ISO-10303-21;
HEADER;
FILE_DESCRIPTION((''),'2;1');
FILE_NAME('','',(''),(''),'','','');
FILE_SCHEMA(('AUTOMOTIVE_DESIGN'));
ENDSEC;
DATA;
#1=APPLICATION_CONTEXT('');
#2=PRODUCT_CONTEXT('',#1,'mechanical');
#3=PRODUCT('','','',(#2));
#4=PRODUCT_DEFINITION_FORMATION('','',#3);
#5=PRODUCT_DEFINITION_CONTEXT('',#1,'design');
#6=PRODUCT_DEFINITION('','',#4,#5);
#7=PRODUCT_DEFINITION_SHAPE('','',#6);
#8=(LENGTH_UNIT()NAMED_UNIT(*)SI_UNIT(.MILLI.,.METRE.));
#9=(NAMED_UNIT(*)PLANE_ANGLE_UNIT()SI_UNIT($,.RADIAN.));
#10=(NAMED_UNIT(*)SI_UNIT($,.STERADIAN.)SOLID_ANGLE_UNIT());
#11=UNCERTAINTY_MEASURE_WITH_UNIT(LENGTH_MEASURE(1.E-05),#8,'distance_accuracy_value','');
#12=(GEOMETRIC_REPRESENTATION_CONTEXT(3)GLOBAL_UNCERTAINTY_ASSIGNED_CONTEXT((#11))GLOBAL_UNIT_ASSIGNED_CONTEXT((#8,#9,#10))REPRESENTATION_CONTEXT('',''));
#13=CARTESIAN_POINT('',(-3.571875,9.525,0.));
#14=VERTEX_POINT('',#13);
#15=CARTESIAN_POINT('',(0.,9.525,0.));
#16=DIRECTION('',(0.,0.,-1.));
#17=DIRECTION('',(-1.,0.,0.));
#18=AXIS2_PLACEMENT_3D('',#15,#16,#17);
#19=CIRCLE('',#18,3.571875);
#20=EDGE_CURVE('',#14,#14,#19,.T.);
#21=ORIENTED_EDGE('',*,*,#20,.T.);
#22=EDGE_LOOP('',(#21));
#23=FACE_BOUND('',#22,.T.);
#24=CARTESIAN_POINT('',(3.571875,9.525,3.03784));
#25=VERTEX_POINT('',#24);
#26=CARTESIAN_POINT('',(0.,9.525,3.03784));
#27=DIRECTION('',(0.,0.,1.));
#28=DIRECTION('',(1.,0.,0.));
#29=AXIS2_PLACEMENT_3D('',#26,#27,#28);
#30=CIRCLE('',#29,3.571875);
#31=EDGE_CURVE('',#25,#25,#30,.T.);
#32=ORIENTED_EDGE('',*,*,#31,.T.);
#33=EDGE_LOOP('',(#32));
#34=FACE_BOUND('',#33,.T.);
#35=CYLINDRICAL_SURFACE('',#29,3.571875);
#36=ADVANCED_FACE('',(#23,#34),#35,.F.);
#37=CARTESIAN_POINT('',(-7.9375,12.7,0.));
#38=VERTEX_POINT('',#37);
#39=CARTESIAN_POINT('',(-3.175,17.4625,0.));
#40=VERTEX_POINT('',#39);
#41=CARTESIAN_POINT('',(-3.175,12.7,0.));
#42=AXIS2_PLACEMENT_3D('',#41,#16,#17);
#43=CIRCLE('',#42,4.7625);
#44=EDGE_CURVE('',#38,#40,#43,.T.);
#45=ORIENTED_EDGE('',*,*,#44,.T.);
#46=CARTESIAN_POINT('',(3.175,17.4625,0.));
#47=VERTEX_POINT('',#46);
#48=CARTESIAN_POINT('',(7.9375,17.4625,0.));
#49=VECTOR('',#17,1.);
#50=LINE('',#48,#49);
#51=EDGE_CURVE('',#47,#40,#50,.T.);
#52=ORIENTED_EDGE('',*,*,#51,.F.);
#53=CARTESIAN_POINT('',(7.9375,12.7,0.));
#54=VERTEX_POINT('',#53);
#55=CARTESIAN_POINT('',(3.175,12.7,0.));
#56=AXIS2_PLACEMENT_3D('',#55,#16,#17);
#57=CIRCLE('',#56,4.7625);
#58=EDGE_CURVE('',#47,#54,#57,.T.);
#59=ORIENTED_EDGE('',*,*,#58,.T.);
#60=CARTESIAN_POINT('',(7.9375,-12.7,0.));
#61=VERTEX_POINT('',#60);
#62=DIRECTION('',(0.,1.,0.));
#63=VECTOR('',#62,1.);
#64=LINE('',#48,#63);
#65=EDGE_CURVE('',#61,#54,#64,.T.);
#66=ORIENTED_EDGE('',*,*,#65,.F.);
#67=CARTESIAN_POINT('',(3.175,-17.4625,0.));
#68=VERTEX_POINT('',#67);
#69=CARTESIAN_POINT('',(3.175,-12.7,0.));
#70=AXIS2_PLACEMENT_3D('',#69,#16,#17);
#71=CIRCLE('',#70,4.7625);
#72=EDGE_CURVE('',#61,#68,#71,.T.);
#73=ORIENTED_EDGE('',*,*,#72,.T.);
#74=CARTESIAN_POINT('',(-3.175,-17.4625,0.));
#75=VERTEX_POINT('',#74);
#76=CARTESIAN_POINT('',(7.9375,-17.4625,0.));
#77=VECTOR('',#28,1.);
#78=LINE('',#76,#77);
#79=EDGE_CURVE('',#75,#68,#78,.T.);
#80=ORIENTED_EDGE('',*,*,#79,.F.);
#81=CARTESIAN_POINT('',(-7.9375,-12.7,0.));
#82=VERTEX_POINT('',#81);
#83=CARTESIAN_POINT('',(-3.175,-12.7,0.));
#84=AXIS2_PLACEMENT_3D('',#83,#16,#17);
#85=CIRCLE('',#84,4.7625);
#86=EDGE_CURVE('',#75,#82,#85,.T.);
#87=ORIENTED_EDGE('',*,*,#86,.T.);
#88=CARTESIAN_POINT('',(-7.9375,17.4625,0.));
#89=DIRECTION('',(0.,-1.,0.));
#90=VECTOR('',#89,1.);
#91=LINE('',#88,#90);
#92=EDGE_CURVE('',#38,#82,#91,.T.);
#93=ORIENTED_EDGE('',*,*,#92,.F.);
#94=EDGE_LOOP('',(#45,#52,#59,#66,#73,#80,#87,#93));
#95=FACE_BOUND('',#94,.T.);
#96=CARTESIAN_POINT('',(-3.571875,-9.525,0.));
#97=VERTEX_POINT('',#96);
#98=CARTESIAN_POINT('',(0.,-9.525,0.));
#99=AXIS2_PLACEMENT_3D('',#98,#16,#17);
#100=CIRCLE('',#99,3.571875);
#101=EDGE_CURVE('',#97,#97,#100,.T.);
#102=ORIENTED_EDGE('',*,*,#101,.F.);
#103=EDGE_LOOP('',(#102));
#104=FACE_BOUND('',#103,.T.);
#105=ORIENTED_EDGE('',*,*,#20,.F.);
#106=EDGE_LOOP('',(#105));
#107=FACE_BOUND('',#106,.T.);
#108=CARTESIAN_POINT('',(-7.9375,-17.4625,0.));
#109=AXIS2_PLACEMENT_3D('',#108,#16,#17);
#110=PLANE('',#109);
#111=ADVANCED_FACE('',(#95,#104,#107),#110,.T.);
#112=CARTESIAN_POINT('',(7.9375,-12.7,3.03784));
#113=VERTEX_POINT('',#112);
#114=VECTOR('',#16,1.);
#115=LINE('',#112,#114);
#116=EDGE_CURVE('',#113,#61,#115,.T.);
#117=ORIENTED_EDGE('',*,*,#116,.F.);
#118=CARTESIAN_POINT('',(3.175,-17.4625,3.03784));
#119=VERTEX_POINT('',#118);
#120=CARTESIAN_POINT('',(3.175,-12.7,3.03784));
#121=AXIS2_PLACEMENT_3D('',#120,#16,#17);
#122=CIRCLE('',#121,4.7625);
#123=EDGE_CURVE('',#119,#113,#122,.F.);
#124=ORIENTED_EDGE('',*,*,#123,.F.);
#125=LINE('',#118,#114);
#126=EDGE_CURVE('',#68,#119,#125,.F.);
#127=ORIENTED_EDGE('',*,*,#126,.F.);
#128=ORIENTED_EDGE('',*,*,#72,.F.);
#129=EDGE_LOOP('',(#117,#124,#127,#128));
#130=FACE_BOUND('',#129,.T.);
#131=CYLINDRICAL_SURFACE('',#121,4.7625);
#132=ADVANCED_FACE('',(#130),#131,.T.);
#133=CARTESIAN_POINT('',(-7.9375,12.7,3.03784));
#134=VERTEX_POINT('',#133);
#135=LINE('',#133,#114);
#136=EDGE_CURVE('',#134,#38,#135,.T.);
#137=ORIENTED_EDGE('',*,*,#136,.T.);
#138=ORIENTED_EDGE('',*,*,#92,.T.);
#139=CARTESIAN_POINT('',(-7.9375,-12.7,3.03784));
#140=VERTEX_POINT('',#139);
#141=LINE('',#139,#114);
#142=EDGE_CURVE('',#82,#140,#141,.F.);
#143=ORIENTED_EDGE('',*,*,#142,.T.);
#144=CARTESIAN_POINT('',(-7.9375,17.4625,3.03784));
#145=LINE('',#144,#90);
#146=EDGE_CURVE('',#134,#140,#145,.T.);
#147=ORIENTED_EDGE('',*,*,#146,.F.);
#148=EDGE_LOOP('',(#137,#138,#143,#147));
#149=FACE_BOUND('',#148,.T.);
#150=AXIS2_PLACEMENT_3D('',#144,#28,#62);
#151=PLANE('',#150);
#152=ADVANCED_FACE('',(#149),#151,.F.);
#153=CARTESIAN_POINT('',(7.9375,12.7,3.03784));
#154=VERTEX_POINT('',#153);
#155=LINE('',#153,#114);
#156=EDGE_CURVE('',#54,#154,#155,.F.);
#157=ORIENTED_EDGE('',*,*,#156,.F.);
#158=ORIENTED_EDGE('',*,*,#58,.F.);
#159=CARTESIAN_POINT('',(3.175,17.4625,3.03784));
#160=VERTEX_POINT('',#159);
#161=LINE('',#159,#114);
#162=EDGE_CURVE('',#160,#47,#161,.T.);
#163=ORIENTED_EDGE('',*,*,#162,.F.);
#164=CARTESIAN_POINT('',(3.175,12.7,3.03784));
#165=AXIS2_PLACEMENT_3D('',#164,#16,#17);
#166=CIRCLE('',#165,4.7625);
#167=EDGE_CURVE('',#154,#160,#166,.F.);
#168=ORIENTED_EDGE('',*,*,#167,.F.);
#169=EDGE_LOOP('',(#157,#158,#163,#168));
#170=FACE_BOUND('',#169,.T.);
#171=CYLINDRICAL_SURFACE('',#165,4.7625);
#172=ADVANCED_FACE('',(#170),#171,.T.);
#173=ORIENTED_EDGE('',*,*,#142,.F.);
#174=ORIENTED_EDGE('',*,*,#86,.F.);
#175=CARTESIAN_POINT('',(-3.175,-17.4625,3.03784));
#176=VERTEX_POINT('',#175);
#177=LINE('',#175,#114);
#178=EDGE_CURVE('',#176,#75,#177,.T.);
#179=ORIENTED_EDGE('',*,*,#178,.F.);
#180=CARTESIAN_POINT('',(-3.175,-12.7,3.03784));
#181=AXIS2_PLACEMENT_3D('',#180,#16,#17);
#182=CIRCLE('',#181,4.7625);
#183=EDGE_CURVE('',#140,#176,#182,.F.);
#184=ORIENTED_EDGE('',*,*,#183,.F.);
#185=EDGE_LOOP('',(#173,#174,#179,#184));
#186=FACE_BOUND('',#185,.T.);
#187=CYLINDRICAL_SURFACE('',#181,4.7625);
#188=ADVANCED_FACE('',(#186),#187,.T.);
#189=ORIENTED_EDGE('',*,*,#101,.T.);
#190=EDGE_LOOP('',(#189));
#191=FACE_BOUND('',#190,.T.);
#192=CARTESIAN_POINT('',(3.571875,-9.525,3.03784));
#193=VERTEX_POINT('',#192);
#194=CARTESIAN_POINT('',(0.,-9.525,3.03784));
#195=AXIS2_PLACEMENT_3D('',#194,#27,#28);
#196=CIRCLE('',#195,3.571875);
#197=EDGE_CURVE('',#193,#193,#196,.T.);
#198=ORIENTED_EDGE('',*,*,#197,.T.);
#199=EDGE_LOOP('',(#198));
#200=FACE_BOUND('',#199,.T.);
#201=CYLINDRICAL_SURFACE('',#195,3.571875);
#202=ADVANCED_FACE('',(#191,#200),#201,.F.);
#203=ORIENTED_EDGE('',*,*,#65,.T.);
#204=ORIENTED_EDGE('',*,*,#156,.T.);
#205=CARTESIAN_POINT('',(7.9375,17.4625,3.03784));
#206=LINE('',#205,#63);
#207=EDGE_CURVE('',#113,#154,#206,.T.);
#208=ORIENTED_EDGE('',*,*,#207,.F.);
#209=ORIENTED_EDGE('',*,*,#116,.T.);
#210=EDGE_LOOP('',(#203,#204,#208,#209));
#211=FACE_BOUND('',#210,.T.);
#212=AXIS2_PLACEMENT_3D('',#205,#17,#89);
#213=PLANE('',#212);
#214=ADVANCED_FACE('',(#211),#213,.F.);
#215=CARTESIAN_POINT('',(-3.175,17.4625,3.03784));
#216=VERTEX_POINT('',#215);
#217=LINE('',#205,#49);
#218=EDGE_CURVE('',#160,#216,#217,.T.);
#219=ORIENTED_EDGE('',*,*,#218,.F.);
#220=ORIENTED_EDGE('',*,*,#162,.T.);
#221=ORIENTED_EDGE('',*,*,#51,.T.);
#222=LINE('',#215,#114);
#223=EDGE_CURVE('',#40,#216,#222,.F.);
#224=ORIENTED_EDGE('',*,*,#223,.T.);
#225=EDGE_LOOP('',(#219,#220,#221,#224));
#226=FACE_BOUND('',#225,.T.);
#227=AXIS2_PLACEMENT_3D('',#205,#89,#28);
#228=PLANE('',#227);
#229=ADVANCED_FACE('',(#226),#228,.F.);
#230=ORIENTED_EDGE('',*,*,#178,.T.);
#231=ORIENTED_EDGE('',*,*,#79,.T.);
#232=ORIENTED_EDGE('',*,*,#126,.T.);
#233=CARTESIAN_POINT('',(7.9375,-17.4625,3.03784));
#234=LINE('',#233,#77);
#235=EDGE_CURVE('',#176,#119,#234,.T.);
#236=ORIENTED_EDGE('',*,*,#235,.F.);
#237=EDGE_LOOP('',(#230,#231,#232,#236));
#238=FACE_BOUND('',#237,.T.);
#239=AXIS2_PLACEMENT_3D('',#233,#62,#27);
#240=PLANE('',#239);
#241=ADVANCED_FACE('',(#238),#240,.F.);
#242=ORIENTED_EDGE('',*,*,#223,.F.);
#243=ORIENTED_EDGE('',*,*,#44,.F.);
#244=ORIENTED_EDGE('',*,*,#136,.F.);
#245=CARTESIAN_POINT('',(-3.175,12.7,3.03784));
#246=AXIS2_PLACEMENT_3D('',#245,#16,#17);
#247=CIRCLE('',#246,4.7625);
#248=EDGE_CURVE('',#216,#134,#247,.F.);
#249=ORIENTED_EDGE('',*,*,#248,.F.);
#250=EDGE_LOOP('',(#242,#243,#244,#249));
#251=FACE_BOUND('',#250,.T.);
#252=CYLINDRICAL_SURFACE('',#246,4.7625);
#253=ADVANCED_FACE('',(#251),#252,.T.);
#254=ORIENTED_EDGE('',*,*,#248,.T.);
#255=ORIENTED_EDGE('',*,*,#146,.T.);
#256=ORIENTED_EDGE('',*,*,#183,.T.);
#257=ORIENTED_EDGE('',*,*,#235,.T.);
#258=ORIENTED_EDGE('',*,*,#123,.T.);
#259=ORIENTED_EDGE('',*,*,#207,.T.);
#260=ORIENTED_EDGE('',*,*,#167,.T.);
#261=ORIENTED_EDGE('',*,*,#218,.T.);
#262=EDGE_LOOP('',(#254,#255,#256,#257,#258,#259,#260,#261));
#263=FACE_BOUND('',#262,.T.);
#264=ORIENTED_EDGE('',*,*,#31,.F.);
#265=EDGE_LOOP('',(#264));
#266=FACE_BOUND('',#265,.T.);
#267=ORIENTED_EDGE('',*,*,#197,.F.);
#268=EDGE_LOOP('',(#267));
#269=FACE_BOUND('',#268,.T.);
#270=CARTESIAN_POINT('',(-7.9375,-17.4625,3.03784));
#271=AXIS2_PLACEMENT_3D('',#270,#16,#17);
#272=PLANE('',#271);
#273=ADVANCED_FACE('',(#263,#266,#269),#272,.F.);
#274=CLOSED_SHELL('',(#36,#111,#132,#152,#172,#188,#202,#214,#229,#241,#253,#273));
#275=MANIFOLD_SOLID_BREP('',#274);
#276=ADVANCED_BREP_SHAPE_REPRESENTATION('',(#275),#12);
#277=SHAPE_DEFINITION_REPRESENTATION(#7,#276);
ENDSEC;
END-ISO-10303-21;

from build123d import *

# Parameters (mm, degrees)
SKETCH1_W                       = 15.875
SKETCH1_H                       = 34.925
BASE_FLANGE1_DEPTH              = 3.03784
F_9_32_0_28125_DIAMETER_HOLE1_D = 7.14375
BREAK_CORNER1_DEPTH             = 3.03784


# Read off the part's stored shape, not the designer's step: Break-Corner1
# Sheet-metal steps are written as plain solids
with BuildPart() as part:
    # Sketch1 → Base-Flange1 (new body)
    with BuildSketch(Plane.XY):
        Rectangle(SKETCH1_W, SKETCH1_H)
    extrude(amount=BASE_FLANGE1_DEPTH)

    # 9/32 (0.28125) Diameter Hole1 (through all)
    with Locations(Plane.XY.offset(3.03784)):
        with Locations((0, 9.525), (0, -9.525)):
            Hole(F_9_32_0_28125_DIAMETER_HOLE1_D / 2)

    # Break-Corner1 outline → Break-Corner1 (cut)
    with BuildSketch(Plane.XY):
        with BuildLine():
            Line((-7.9375, -17.4625), (-3.175, -17.4625))
            ThreePointArc((-3.175, -17.4625), (-6.542596045, -16.067596045), (-7.9375, -12.7))
            Line((-7.9375, -12.7), (-7.9375, -17.4625))
        make_face()
        with BuildLine():
            ThreePointArc((7.9375, -12.7), (6.542596045, -16.067596045), (3.175, -17.4625))
            Line((3.175, -17.4625), (7.9375, -17.4625))
            Line((7.9375, -17.4625), (7.9375, -12.7))
        make_face()
        with BuildLine():
            Line((-7.9375, 17.4625), (-7.9375, 12.7))
            ThreePointArc((-7.9375, 12.7), (-6.542596045, 16.067596045), (-3.175, 17.4625))
            Line((-3.175, 17.4625), (-7.9375, 17.4625))
        make_face()
        with BuildLine():
            ThreePointArc((3.175, 17.4625), (6.542596045, 16.067596045), (7.9375, 12.7))
            Line((7.9375, 12.7), (7.9375, 17.4625))
            Line((7.9375, 17.4625), (3.175, 17.4625))
        make_face()
    extrude(amount=BREAK_CORNER1_DEPTH, mode=Mode.SUBTRACT)


solid = part.part
